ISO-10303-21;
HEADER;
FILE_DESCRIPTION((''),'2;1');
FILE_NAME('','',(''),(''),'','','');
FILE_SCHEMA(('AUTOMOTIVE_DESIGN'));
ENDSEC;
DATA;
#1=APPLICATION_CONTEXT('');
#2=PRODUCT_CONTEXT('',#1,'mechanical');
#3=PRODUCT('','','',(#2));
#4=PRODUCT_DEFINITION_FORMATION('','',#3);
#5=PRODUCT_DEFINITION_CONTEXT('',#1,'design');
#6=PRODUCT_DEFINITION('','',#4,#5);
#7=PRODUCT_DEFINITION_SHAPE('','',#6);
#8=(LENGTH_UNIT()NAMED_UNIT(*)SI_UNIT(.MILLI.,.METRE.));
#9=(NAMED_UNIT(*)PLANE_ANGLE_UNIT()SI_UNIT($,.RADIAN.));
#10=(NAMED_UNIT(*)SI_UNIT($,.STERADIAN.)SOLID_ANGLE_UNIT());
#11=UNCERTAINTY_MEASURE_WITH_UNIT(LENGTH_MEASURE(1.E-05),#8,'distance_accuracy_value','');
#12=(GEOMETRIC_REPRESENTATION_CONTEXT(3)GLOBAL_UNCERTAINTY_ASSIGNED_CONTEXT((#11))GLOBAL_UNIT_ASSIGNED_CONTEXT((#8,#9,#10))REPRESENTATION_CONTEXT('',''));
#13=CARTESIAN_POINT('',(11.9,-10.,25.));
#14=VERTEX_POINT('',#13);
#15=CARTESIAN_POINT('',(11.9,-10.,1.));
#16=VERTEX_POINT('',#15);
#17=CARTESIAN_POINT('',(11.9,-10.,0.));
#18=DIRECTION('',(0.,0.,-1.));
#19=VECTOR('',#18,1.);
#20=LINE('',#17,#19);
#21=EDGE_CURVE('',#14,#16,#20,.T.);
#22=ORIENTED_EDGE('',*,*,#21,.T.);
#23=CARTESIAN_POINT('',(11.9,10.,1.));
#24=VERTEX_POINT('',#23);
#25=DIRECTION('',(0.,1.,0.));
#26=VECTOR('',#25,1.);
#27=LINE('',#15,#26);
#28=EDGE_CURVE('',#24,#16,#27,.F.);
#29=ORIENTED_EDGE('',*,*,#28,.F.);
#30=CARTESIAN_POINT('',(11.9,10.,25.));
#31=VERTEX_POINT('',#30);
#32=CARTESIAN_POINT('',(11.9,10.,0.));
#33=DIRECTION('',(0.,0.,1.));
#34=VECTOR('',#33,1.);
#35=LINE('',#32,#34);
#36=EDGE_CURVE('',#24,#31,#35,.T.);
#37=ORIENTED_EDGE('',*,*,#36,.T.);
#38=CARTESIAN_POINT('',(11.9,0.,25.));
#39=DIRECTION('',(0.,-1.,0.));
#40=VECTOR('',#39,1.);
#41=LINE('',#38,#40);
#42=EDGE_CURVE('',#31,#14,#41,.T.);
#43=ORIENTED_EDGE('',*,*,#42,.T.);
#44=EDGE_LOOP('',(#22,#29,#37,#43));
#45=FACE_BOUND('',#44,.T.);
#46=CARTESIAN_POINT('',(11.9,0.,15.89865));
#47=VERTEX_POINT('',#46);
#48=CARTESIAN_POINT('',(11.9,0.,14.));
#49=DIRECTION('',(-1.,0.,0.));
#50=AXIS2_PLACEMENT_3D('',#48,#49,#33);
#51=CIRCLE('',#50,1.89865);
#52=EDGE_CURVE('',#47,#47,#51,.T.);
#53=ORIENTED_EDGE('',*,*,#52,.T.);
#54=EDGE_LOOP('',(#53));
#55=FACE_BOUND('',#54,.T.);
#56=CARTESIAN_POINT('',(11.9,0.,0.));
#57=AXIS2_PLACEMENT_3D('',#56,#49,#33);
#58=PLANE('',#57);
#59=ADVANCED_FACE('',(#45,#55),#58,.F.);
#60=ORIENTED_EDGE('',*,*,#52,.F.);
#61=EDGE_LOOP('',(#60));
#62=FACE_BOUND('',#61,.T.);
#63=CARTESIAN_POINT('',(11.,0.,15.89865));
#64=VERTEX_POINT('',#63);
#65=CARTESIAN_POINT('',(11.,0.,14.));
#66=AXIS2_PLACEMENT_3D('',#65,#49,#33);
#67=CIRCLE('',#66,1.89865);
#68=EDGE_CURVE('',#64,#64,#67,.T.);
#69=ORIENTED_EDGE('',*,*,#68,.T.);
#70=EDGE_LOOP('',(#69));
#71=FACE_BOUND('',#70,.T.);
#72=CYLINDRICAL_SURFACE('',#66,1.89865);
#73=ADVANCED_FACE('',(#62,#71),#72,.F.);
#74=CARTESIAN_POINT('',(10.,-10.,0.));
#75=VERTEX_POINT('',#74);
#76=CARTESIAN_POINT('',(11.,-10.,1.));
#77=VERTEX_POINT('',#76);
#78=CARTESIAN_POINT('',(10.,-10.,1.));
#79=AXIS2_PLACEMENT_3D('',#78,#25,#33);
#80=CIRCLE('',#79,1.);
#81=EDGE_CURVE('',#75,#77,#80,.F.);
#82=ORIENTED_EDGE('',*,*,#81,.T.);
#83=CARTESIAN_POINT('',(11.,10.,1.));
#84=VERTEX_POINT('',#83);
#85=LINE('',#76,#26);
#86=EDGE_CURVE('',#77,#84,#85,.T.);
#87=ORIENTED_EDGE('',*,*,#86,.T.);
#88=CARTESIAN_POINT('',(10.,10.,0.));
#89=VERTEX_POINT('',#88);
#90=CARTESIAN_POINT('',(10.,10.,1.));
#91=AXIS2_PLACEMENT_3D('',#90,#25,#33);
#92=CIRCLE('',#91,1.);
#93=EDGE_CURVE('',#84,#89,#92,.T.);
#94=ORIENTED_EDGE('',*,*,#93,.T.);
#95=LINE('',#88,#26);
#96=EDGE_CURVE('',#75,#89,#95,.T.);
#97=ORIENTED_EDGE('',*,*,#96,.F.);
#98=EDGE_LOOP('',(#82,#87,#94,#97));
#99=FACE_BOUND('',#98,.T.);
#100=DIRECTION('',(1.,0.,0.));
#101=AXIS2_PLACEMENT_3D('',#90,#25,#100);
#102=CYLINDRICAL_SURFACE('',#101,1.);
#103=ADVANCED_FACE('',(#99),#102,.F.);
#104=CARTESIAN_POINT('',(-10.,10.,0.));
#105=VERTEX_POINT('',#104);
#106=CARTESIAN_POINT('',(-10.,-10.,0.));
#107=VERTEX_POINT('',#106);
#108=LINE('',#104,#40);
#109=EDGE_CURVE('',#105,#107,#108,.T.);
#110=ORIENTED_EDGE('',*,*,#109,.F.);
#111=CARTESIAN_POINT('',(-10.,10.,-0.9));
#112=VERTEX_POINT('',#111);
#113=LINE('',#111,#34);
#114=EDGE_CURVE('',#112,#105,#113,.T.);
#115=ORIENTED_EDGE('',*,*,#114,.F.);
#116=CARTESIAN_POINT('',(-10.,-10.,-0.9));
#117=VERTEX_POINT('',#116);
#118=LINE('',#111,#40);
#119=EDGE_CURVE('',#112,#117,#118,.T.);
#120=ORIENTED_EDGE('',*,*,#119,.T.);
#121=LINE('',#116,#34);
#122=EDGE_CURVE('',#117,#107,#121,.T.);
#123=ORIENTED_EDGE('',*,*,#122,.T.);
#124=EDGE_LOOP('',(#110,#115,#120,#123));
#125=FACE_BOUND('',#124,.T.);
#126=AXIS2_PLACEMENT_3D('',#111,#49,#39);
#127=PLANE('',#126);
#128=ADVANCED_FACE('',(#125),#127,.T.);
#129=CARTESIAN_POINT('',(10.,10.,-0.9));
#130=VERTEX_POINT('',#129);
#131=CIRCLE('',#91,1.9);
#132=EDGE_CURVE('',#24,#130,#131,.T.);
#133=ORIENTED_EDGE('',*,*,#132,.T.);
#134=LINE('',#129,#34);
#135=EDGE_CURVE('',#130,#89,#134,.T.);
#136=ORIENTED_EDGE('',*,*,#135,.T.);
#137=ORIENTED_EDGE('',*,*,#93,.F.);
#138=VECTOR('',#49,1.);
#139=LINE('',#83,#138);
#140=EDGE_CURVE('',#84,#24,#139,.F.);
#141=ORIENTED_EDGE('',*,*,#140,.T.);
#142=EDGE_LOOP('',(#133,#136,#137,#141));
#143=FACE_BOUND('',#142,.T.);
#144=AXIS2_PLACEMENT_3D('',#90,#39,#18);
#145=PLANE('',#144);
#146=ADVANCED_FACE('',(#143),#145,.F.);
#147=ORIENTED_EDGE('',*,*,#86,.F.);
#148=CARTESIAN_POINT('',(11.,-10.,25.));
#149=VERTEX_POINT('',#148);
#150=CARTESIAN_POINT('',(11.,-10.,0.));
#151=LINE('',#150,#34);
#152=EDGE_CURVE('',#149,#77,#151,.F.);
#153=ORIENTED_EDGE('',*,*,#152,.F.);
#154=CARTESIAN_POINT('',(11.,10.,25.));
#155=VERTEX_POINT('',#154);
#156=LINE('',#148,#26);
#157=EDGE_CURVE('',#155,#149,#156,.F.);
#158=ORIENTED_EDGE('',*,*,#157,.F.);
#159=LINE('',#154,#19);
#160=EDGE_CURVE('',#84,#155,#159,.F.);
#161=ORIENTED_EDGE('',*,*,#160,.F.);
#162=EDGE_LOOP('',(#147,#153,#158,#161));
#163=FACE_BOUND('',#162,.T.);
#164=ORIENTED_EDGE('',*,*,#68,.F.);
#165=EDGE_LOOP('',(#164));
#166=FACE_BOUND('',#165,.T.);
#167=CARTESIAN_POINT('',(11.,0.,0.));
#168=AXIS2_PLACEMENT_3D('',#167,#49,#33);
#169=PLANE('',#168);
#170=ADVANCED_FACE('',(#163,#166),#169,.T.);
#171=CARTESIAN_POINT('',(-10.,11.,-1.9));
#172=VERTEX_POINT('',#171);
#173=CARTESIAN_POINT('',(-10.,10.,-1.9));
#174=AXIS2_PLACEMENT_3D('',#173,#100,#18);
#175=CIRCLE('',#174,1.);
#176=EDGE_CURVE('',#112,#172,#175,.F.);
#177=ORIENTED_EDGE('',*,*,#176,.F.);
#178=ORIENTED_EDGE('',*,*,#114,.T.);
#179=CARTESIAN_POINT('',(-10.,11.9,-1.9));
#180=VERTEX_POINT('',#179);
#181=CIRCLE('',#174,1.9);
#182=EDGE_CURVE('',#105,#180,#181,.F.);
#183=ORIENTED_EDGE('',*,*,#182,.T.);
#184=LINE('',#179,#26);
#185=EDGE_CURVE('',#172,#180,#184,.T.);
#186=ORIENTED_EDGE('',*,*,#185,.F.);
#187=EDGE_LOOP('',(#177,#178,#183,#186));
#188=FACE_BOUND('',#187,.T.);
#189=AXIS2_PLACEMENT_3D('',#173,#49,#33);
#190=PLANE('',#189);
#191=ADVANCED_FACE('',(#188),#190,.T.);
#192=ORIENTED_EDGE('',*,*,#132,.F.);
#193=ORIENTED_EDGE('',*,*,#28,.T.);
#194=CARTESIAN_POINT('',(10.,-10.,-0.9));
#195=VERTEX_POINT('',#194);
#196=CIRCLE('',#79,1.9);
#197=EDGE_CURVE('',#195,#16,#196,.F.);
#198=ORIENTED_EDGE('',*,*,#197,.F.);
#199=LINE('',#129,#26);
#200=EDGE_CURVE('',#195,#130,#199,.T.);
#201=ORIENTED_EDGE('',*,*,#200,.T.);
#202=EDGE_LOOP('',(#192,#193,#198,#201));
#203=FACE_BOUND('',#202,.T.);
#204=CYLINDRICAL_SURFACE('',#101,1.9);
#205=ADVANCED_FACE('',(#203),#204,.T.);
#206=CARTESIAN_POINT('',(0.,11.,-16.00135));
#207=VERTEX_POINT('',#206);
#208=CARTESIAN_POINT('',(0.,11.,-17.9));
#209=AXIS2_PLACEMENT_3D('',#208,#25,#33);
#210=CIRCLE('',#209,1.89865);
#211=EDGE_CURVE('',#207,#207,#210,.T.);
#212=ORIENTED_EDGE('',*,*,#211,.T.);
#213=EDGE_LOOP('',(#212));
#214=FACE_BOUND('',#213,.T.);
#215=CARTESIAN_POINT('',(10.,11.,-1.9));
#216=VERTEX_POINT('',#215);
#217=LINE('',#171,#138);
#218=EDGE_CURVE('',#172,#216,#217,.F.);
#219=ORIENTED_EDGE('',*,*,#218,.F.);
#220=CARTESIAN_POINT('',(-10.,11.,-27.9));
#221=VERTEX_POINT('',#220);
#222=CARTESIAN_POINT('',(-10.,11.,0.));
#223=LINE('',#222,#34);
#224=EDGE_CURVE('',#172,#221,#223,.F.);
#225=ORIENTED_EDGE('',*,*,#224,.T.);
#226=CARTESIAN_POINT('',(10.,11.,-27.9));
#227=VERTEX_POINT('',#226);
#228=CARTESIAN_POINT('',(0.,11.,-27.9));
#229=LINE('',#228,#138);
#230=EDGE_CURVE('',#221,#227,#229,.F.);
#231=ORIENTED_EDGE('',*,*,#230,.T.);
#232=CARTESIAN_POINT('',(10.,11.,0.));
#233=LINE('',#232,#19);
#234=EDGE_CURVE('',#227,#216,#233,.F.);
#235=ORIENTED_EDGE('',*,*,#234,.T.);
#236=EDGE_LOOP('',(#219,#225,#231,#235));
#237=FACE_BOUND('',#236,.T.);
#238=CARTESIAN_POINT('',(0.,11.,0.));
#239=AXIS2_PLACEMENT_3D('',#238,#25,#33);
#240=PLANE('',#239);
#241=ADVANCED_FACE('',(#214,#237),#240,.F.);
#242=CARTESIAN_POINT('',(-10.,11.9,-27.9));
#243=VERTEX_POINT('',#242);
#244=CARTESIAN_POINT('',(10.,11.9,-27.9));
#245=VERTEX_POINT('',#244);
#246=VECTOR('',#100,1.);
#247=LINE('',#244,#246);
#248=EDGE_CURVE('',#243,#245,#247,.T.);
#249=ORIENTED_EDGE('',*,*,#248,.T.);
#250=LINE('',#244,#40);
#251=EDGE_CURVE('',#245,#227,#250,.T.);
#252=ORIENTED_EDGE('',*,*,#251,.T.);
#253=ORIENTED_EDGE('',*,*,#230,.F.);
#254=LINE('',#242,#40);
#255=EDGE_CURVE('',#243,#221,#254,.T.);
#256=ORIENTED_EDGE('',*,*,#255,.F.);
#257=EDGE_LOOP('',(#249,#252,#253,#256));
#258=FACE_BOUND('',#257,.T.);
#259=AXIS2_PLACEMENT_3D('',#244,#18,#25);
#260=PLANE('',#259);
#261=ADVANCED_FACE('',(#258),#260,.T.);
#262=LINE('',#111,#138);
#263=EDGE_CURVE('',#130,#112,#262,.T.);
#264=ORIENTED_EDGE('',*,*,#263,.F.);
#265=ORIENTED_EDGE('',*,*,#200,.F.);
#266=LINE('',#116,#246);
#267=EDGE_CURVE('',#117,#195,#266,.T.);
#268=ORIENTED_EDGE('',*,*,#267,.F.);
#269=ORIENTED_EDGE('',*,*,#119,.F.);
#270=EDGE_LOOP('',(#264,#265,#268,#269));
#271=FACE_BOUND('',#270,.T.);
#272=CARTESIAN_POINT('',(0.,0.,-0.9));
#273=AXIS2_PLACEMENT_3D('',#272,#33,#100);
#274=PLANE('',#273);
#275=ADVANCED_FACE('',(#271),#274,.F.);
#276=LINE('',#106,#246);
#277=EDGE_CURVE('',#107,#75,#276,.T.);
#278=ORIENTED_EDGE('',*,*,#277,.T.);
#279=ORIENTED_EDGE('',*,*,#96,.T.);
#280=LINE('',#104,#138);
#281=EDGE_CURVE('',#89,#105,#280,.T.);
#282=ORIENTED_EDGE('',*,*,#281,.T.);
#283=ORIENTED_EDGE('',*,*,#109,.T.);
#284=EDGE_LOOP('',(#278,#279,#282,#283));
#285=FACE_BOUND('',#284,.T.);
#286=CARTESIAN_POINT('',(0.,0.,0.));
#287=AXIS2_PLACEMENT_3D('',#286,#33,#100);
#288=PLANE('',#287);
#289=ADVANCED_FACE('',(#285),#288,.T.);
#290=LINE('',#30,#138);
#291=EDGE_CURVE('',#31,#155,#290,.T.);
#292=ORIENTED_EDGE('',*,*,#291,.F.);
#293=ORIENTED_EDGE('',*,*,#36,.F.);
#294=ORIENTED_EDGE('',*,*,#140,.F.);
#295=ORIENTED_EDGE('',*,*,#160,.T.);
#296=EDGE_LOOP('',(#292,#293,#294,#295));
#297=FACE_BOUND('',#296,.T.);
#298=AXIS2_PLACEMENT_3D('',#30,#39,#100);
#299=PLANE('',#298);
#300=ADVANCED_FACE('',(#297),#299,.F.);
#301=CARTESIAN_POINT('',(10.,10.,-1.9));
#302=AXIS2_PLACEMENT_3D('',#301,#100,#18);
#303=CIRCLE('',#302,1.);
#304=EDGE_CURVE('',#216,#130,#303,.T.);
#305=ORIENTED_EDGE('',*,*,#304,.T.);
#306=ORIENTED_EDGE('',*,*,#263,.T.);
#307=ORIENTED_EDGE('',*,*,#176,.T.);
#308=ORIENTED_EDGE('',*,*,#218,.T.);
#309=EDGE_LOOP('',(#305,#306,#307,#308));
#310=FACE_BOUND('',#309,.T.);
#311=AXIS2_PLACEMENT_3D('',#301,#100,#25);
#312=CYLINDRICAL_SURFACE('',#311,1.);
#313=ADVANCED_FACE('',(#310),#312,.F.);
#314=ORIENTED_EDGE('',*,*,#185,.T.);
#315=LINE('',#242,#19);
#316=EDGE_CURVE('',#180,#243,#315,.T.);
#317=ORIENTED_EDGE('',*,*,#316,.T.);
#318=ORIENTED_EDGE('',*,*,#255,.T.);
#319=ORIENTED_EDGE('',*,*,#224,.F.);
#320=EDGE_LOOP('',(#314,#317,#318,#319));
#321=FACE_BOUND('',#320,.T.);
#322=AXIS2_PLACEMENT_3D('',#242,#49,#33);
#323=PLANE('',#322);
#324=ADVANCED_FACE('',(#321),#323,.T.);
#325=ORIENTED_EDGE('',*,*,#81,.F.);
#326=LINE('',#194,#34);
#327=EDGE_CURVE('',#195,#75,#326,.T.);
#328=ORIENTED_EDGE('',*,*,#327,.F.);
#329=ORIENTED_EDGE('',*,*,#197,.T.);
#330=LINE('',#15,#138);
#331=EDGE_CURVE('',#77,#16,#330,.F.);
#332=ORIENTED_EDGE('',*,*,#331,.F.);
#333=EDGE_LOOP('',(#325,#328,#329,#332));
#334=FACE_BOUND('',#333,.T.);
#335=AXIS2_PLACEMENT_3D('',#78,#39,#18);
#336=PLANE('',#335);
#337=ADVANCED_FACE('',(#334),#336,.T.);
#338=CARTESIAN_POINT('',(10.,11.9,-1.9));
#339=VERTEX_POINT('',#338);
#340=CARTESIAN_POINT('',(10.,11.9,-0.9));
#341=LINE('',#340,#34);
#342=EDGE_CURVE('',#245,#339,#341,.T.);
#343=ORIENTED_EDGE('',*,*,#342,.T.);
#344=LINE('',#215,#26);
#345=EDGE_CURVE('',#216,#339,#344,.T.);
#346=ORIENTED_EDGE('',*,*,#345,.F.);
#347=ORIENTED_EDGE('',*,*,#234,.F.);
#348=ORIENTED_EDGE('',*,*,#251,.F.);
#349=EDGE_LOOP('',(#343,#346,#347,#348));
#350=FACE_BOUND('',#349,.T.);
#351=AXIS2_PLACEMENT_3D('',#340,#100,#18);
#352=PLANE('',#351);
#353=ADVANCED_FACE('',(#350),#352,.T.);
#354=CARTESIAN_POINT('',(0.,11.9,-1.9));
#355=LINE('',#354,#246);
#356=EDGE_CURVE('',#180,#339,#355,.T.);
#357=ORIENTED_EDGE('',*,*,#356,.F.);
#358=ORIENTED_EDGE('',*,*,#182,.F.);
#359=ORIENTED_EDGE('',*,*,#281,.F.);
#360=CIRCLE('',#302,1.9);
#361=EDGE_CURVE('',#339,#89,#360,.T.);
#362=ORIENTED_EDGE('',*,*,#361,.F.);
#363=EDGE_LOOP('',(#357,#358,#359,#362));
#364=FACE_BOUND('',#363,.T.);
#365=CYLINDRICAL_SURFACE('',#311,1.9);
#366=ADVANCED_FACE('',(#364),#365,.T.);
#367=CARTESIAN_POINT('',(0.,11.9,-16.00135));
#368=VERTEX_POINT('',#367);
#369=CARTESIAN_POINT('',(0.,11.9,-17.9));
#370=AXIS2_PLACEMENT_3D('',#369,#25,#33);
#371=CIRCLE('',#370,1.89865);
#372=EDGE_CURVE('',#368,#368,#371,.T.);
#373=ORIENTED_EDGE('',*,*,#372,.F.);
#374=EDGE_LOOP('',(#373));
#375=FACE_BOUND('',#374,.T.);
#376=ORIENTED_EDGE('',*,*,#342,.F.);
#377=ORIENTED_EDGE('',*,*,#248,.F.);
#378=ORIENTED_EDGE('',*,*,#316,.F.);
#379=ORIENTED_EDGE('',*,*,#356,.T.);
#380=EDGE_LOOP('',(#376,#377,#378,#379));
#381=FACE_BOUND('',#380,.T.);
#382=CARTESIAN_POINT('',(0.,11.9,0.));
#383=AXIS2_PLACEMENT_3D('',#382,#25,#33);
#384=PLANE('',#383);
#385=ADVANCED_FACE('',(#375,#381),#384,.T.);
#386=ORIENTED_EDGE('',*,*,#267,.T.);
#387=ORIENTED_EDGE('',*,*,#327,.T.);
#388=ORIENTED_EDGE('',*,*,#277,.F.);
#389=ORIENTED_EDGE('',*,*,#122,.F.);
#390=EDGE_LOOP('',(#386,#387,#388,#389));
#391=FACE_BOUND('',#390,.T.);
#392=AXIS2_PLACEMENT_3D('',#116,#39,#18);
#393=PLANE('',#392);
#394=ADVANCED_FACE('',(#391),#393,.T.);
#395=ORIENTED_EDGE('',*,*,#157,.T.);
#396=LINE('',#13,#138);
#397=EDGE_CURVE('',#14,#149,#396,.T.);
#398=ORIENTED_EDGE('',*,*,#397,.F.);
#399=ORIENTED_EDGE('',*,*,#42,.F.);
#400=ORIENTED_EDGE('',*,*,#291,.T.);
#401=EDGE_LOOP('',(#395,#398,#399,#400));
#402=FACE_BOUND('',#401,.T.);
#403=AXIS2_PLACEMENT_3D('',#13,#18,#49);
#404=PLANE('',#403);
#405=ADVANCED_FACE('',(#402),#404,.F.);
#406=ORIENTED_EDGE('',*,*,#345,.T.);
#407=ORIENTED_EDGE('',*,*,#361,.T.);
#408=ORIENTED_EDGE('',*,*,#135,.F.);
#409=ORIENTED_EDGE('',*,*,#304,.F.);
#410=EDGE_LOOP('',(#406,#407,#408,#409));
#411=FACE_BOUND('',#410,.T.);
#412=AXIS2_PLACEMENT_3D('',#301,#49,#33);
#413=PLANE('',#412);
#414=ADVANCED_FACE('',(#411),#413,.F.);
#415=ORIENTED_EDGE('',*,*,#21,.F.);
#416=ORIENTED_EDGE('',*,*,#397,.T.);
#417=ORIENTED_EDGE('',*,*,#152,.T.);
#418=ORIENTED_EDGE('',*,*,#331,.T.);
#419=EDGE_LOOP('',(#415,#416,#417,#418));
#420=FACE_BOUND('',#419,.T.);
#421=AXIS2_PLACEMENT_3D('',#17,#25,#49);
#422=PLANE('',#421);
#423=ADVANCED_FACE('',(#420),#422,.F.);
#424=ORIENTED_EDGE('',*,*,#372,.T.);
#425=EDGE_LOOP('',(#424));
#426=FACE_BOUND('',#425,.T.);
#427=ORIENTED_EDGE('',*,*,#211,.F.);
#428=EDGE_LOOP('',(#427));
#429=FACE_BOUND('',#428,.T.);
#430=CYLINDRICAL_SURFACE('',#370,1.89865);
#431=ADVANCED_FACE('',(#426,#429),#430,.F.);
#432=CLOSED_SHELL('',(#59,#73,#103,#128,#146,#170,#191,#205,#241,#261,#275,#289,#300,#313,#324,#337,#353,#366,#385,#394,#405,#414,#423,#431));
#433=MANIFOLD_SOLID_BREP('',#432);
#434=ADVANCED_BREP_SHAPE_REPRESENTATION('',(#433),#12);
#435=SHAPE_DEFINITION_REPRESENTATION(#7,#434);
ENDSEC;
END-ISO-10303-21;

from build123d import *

# Parameters (mm, degrees)
SKETCH1_W                    = 20
SKETCH1_H                    = 20
BASE_FLANGE1_DEPTH           = 0.9
EDGE_FLANGE2_DEPTH           = 20
F_25_0_1495_DIAMETER_SLOT2_D = 3.7973
EDGE_FLANGE4_DEPTH           = 20
F_25_0_1495_DIAMETER_SLOT5_D = 3.7973


# Sheet-metal steps are written as plain solids
with BuildPart() as part:
    # Sketch1 → Base-Flange1 (new body)
    with BuildSketch(Plane.XY):
        Rectangle(SKETCH1_W, SKETCH1_H)
    extrude(amount=-BASE_FLANGE1_DEPTH)

    # Edge-Flange2 section (across the edge) → Edge-Flange2 (add)
    with BuildSketch(Plane(origin=(-10, 11, -0.9), x_dir=(0, -1, 0), z_dir=(1, 0, 0))):
        with BuildLine():
            Line((-0.9, 1), (-0.9, 27))
            Line((-0.9, 27), (0, 27))
            Line((0, 27), (0, 1))
            ThreePointArc((0, 1), (0.292893219, 0.292893219), (1, 0))
            Line((1, 0), (1, -0.9))
            ThreePointArc((1, -0.9), (-0.343502884, -0.343502884), (-0.9, 1))
        make_face()
    extrude(amount=EDGE_FLANGE2_DEPTH)

    # #25 (0.1495) Diameter Slot2 (through all)
    with Locations(Plane(origin=(0, 11.9, 0), x_dir=(1, 0, 0), z_dir=(0, 1, 0))):
        with Locations((0, 17.9)):
            Hole(F_25_0_1495_DIAMETER_SLOT2_D / 2)

    # Edge-Flange4 section (across the edge) → Edge-Flange4 (add)
    with BuildSketch(Plane(origin=(11, -10, 0), x_dir=(-1, 0, 0), z_dir=(0, 1, 0))):
        with BuildLine():
            Line((-0.9, 1), (-0.9, 25))
            Line((-0.9, 25), (0, 25))
            Line((0, 25), (0, 1))
            ThreePointArc((0, 1), (0.292893219, 0.292893219), (1, 0))
            Line((1, 0), (1, -0.9))
            ThreePointArc((1, -0.9), (-0.343502884, -0.343502884), (-0.9, 1))
        make_face()
    extrude(amount=EDGE_FLANGE4_DEPTH)

    # #25 (0.1495) Diameter Slot5 (through all)
    with Locations(Plane.ZY.offset(-11)):
        with Locations((14, 0)):
            Hole(F_25_0_1495_DIAMETER_SLOT5_D / 2)


solid = part.part
